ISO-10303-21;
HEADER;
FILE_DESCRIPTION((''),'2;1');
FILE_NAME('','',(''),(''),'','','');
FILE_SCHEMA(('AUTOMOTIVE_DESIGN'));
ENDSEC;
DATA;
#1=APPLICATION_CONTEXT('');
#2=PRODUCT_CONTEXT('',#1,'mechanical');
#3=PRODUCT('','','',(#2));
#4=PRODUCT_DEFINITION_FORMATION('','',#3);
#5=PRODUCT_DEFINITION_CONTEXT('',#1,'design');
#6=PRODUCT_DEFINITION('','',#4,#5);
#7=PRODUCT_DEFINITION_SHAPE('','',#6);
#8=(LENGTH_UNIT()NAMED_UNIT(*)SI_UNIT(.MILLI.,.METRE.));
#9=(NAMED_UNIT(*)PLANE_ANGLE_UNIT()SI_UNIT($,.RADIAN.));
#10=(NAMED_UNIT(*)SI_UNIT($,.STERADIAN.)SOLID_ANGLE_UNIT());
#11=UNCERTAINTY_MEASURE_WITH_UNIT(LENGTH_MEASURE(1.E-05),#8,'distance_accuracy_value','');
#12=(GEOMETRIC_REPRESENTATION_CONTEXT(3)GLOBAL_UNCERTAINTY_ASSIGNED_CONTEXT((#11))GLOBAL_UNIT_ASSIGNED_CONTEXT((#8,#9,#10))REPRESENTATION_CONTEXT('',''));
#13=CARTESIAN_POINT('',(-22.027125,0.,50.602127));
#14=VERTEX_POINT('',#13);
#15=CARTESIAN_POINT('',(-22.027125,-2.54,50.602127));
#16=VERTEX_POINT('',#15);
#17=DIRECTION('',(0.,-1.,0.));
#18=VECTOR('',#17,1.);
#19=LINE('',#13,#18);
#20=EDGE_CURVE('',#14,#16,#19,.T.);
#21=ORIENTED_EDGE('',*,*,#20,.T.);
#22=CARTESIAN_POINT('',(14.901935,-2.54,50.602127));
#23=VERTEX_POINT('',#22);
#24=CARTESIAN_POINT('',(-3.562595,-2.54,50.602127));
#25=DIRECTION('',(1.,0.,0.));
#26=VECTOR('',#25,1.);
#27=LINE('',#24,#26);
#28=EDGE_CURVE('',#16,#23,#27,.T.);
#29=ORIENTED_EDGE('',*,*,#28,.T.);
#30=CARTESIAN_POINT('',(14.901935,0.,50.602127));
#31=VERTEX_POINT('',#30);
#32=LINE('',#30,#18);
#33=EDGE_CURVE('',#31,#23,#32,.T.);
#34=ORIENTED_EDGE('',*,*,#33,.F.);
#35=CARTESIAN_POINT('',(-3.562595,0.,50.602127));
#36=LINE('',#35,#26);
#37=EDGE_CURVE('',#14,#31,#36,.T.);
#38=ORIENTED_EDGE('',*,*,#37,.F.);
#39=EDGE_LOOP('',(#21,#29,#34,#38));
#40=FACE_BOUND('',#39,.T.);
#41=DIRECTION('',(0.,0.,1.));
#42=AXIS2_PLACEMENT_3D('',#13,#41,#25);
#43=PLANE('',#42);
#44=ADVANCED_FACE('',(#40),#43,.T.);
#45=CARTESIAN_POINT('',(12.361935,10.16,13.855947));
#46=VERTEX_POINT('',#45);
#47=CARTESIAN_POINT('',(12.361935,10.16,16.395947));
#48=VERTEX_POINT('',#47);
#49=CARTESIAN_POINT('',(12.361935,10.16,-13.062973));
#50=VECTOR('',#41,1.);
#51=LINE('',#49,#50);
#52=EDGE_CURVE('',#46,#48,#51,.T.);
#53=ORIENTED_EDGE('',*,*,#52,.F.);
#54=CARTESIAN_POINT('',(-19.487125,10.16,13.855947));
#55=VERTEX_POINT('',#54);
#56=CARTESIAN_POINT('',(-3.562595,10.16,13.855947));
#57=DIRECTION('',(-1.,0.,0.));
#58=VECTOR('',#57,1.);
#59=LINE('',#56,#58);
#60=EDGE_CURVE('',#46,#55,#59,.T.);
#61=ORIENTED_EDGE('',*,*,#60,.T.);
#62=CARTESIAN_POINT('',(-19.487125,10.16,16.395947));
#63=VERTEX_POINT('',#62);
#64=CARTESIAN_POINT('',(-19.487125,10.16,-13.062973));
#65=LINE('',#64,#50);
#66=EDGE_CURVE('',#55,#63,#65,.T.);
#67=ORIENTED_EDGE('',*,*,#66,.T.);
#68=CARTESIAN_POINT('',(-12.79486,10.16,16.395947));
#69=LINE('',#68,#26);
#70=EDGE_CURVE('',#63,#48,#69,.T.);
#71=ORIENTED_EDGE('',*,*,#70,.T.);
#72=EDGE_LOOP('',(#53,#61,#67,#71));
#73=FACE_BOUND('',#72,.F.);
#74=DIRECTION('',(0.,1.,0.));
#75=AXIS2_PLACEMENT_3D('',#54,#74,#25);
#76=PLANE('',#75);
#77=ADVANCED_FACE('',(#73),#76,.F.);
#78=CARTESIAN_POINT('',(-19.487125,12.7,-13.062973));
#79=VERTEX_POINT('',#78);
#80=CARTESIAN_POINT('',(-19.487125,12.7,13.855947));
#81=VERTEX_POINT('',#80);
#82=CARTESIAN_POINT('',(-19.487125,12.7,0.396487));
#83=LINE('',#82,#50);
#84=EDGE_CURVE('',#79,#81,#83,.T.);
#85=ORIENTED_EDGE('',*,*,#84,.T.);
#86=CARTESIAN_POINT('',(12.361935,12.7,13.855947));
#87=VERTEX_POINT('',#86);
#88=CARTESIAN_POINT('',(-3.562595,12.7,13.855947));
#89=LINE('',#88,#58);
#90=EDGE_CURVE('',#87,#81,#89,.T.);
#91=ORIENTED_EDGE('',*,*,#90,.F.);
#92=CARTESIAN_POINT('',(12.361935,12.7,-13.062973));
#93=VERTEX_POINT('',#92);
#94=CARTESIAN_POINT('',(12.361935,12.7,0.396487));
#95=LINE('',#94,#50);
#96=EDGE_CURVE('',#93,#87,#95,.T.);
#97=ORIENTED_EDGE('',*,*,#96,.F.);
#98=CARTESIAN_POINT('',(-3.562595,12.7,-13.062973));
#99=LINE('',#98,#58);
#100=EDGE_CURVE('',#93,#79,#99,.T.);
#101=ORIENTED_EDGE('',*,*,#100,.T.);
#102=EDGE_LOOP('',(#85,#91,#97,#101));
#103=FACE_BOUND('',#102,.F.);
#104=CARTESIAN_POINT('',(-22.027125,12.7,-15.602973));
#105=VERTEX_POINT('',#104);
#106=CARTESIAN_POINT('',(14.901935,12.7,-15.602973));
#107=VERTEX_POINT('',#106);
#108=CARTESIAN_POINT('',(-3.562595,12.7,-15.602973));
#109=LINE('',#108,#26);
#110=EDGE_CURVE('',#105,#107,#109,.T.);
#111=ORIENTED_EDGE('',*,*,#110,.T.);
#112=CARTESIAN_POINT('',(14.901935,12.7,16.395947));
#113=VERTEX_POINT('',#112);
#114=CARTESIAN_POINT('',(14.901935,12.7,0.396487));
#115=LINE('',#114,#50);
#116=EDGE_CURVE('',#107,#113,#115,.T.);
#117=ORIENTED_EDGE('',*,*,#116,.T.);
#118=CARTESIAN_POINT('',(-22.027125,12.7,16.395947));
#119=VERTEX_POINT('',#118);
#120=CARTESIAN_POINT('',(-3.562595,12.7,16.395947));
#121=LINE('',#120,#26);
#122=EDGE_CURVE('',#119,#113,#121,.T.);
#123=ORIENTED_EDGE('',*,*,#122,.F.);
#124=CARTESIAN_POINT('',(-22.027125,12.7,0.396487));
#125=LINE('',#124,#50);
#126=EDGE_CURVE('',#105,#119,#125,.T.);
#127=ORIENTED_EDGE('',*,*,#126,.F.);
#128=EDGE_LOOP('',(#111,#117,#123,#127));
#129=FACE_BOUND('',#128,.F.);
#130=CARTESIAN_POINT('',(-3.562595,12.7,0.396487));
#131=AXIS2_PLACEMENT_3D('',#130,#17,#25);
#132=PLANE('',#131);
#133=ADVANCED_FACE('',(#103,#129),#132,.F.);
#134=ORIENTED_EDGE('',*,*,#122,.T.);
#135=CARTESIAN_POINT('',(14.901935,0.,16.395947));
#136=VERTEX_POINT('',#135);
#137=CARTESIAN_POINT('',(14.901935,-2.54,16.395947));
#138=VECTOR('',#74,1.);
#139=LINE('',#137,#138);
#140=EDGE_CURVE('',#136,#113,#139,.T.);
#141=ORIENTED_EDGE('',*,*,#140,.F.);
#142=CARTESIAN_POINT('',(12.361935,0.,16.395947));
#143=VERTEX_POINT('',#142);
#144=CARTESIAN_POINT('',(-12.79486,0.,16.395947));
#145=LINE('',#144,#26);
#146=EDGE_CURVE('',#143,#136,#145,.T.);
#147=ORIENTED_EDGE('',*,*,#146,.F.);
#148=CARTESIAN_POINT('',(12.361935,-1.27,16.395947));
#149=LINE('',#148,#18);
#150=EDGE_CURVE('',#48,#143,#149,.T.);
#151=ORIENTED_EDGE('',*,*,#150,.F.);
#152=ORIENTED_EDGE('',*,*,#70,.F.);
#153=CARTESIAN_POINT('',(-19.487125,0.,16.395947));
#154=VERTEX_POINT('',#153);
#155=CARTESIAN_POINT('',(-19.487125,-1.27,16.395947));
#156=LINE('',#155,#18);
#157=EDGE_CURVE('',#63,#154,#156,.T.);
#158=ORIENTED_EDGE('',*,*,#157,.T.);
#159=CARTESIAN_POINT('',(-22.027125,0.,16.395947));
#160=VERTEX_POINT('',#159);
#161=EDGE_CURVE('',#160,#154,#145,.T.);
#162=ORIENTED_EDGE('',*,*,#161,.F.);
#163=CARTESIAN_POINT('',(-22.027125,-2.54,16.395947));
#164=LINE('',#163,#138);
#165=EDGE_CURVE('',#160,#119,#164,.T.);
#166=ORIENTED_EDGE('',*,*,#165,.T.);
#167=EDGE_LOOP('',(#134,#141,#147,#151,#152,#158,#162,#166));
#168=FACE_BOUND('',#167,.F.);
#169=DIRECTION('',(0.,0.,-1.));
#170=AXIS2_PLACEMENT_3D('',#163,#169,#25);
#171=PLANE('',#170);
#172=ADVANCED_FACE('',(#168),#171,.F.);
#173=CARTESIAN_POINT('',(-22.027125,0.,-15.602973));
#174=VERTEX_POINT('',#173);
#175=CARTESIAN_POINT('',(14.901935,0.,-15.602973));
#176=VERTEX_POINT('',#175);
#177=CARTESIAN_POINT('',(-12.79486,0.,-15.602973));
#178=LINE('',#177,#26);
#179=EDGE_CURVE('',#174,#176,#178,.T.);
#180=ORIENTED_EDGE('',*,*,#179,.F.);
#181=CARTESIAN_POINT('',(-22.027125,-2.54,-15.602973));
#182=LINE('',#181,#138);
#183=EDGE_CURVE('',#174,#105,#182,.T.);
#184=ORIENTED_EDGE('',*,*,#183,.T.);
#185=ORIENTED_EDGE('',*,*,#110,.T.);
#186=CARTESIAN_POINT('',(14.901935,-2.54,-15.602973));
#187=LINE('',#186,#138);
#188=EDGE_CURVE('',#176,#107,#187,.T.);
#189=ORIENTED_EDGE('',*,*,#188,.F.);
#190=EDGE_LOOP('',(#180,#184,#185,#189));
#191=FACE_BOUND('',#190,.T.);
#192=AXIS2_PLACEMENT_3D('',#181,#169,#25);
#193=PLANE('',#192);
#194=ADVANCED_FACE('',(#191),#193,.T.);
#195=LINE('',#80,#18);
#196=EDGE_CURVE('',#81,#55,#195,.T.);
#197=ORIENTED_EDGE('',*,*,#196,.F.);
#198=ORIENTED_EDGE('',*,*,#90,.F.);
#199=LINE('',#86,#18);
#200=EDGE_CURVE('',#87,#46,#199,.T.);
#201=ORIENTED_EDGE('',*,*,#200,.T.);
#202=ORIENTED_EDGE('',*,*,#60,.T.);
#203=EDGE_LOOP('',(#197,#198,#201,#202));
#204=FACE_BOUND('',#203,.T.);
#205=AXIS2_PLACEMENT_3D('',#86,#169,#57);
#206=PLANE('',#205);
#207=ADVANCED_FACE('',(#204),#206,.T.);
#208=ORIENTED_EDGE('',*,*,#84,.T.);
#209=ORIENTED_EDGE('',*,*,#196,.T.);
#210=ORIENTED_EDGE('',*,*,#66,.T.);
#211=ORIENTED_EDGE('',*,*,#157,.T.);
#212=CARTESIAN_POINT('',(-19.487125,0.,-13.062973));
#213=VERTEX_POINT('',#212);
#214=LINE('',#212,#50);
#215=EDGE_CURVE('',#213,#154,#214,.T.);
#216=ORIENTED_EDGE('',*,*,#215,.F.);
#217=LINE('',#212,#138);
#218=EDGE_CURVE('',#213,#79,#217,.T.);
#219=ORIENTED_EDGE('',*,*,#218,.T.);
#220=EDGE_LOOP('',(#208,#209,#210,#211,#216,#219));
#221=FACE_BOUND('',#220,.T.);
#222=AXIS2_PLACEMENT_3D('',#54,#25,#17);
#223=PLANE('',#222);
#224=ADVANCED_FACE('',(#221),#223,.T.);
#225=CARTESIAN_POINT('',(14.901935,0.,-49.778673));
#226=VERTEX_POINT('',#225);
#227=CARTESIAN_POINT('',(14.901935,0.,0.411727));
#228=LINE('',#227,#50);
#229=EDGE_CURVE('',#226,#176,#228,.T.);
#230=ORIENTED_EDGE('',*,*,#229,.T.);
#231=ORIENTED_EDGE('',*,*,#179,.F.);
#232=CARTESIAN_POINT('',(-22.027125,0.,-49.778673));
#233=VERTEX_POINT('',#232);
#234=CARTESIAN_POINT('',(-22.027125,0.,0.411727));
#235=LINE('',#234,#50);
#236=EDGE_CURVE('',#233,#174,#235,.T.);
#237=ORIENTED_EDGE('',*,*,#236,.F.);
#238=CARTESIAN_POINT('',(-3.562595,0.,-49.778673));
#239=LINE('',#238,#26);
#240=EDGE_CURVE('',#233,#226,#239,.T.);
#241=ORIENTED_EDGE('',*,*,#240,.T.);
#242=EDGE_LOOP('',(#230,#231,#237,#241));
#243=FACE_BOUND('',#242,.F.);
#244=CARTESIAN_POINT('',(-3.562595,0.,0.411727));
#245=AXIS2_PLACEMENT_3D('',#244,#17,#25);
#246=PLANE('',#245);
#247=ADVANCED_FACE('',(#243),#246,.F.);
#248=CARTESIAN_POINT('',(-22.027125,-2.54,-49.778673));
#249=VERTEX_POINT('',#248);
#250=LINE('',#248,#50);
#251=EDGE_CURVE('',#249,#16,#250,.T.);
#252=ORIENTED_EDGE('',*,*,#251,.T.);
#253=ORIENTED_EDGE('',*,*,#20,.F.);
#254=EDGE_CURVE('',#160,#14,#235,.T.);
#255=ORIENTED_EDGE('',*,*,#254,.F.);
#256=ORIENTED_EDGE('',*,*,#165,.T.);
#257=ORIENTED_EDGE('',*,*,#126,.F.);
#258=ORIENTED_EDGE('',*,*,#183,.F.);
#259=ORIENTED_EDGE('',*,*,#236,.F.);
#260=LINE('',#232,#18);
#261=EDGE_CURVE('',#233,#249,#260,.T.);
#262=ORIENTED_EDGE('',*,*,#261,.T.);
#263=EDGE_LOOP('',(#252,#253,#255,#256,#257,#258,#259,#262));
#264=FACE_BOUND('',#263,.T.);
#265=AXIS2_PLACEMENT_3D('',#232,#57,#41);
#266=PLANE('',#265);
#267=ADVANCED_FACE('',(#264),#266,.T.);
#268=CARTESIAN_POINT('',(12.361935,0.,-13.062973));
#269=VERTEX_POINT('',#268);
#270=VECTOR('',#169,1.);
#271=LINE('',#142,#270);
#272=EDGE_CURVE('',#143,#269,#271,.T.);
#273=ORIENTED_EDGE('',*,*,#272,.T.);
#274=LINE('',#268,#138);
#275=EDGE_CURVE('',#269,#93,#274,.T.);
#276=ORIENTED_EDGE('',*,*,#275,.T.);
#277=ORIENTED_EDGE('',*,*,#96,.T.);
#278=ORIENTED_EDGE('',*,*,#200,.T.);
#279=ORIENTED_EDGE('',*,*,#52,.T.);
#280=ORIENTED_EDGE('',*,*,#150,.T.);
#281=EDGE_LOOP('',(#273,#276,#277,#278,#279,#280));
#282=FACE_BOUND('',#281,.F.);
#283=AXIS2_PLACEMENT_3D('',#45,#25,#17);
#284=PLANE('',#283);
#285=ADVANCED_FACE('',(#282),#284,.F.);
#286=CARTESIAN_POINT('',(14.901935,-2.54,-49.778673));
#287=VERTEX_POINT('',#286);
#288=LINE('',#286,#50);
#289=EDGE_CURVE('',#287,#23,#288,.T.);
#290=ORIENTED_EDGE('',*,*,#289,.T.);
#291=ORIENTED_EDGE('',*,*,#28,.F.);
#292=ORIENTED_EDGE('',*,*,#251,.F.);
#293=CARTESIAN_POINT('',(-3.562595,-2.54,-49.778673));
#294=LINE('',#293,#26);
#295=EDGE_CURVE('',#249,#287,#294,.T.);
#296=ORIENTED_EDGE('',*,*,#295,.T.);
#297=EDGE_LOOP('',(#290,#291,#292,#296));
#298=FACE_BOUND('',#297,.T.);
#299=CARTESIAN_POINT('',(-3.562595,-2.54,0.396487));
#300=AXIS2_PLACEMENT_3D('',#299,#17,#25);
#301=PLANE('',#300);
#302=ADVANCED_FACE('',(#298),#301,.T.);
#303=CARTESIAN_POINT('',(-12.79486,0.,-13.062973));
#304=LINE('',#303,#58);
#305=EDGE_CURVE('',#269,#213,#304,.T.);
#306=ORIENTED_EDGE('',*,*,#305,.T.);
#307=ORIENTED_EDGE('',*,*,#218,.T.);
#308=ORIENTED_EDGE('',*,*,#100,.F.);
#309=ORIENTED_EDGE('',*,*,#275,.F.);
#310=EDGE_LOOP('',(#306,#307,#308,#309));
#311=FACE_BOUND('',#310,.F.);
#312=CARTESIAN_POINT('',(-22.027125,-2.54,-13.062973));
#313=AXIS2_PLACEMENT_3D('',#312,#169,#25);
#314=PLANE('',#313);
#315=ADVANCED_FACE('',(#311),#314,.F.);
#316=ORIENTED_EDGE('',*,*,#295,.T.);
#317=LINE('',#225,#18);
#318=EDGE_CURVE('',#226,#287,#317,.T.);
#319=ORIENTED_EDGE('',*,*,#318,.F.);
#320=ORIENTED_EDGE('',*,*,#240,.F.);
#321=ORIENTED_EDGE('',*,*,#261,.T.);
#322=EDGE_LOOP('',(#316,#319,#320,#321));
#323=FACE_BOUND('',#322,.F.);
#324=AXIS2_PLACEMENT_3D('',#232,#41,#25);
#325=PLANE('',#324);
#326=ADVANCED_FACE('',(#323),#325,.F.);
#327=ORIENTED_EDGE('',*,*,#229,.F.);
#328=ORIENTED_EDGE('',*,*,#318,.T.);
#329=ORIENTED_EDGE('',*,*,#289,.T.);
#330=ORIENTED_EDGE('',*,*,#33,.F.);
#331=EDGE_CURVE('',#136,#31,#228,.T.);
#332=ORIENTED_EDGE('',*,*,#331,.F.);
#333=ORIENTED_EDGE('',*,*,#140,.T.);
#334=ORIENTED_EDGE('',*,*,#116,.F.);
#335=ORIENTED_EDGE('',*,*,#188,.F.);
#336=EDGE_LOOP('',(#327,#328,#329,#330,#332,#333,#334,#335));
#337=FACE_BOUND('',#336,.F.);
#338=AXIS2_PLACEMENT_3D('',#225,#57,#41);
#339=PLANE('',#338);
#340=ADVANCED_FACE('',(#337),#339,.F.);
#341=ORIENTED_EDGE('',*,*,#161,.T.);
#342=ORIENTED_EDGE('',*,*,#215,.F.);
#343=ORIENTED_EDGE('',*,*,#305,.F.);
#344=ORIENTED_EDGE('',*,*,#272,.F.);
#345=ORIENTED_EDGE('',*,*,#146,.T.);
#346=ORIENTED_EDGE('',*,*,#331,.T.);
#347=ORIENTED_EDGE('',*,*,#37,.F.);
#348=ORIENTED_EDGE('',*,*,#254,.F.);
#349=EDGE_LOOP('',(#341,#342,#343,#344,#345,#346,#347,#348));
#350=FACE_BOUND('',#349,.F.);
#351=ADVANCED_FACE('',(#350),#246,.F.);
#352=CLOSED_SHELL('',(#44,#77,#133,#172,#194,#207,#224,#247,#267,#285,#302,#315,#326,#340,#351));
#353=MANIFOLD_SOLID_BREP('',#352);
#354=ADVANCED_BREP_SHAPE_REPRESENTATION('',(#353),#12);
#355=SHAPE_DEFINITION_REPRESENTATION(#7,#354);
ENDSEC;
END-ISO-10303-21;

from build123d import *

# Parameters (mm, degrees)
F0_W     = 36.92906
F0_H     = 100.3808
F1_DEPTH = 2.54
F2_W     = 36.92906
F2_H     = 31.99892
F3_DEPTH = 15.24
F4_T     = -2.54
F5_W     = 31.84906
F5_H     = 26.91892
F6_DEPTH = 2.54


# Not quite as in the source:
# - a shell that OpenCascade refuses in one call is made with other operations: the cavity is built on its own and cut out


with BuildPart() as f1:
    # F0 (on Front) → F1 (new body)
    with BuildSketch(Plane.XZ):
        with Locations((-3.5625953953, 0.4117265198)):
            Rectangle(F0_W, F0_H)
    extrude(amount=F1_DEPTH)

    # F2 (on face) → F3 (join)
    with BuildSketch(Plane.XZ.offset(2.54)):
        with Locations((-3.5625953953, 0.3964865198)):
            Rectangle(F2_W, F2_H)
    extrude(amount=-F3_DEPTH)

    # F4: a shell. OpenCascade refuses it in one call, so the cavity is built on its own and cut out:
    # the body offset inwards by the wall thickness, plus a prism from it out through each open face.
    f4_core = offset(f1.part, amount=F4_T, kind=Kind.INTERSECTION, mode=Mode.PRIVATE)
    f4_exits = [f4_core.faces().sort_by_distance(p)[0] for p in [
        (-3.562595, 5.08, 13.855947),
    ]]
    add(f4_core, mode=Mode.SUBTRACT)
    extrude(f4_exits, amount=-F4_T, mode=Mode.SUBTRACT)

    # F5 (on face) → F6 (cut, through all)
    with BuildSketch(Plane(origin=(0, 12.7, 0), x_dir=(-1, 0, 0), z_dir=(0, 1, 0))):
        with Locations((3.5625953953, 0.3964865198)):
            Rectangle(F5_W, F5_H)
    extrude(amount=-F6_DEPTH, mode=Mode.SUBTRACT)


solid = f1.part
